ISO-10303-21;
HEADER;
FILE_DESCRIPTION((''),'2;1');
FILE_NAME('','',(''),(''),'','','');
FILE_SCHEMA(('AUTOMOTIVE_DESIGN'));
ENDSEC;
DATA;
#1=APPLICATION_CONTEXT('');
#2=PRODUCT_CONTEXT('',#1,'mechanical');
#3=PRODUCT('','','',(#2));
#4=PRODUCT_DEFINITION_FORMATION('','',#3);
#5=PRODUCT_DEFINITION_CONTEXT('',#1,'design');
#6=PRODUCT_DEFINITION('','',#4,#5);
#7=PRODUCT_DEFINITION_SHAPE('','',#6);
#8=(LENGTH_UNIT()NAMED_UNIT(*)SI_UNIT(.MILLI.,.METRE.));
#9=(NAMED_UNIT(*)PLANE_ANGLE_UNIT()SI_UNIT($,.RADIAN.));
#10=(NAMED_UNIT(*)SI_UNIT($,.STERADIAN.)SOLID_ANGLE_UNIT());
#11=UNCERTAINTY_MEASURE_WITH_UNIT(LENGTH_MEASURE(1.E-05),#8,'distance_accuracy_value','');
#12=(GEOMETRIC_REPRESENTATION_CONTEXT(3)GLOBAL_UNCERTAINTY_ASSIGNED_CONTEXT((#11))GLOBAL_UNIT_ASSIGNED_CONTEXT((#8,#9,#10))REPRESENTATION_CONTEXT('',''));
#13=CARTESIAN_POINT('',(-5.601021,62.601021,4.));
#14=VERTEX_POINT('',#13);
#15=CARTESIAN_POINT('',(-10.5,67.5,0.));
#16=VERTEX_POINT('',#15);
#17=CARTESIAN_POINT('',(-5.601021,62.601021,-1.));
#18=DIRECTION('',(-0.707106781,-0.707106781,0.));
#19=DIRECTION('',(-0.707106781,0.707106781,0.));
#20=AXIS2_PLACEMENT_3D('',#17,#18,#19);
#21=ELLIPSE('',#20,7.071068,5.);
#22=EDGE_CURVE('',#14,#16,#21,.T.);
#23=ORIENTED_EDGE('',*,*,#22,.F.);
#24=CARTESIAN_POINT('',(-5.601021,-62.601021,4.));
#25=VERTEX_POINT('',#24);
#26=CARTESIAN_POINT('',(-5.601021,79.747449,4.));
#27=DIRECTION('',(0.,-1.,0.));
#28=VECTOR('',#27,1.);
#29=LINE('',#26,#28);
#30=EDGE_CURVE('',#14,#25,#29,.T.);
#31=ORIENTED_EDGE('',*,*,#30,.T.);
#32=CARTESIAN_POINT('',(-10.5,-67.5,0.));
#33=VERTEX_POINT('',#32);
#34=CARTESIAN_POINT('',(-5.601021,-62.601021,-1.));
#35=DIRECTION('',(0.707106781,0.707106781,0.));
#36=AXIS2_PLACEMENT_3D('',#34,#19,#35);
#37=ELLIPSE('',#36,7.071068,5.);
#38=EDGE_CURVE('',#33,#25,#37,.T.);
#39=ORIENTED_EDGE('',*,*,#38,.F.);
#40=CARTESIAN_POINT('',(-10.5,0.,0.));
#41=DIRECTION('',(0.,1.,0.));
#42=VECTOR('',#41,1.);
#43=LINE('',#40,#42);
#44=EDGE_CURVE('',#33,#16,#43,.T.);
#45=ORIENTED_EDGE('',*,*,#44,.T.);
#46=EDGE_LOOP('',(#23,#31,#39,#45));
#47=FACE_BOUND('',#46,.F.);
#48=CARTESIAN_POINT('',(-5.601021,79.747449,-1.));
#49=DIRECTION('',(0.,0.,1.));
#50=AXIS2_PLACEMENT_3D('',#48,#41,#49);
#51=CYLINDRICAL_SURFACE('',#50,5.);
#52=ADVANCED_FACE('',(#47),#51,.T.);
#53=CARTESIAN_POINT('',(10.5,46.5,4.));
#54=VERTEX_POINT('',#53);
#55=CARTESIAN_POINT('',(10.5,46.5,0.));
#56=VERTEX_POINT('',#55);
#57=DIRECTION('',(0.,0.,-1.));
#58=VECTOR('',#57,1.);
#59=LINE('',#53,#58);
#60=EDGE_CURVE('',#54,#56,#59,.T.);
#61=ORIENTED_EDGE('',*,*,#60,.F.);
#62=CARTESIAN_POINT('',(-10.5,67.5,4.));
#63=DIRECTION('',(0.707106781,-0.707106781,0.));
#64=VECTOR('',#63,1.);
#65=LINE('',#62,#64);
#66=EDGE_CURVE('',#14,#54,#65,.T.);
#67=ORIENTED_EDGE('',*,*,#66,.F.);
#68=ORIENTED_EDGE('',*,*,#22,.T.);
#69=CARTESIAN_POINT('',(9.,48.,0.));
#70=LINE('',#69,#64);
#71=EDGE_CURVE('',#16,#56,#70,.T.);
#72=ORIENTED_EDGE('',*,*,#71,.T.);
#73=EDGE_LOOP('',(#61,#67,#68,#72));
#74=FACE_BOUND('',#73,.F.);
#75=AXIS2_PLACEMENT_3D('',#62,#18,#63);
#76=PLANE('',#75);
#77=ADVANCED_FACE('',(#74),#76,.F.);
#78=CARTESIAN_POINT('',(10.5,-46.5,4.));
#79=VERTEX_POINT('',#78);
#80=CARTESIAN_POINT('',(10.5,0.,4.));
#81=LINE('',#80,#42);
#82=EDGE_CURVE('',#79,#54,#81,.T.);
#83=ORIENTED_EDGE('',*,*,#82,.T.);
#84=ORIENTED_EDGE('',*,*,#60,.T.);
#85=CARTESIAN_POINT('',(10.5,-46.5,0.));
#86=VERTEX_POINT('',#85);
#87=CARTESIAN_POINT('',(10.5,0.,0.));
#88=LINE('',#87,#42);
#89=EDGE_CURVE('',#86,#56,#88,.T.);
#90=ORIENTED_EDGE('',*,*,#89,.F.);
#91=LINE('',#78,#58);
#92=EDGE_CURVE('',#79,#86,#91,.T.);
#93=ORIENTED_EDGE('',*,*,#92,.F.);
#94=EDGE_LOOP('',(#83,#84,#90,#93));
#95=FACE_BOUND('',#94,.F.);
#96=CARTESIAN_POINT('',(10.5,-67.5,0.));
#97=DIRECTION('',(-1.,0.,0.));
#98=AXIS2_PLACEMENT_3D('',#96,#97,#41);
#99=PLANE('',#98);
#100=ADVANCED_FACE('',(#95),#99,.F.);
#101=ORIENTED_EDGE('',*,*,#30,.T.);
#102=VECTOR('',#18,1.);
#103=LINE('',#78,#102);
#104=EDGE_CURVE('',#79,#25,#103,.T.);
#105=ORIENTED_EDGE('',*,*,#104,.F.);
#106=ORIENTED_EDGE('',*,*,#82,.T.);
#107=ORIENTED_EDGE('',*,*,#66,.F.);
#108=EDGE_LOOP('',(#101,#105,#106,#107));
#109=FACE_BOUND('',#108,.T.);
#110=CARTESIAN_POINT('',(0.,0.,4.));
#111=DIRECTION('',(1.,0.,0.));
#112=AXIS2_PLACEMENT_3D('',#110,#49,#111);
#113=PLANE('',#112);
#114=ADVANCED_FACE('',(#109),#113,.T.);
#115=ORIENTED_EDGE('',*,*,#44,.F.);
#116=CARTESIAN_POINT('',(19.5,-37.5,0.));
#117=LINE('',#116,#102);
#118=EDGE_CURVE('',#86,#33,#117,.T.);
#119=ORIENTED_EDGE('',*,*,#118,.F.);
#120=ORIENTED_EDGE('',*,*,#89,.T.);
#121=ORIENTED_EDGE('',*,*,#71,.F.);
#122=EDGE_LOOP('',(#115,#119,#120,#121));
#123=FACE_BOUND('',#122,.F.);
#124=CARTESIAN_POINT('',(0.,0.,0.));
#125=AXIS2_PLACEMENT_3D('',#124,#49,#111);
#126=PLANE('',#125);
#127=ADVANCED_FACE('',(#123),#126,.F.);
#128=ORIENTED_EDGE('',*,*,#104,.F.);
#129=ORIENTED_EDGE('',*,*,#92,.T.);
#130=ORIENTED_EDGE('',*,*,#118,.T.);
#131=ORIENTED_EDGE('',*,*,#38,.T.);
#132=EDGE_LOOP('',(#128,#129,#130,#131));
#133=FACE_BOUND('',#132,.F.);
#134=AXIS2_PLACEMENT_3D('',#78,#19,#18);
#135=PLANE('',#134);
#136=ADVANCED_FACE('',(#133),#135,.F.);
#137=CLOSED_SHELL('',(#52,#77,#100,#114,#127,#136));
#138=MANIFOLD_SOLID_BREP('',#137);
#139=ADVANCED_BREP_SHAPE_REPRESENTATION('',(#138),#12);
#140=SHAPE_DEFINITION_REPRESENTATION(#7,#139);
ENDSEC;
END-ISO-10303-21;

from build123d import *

# Parameters (mm, degrees)
F0_W        = 21
F0_H        = 135
F1_DEPTH    = 4
F3_DEPTH    = 4.001
F4_T1_DEPTH = 159.4948974279


# Not quite as in the source:
# - a fillet or chamfer that OpenCascade refuses, or shapes differently, is made with other operations: its cross-section is extruded or revolved along the edge and cut away or added


with BuildPart() as f1:
    # F0 (on Top) → F1 (new body)
    with BuildSketch(Plane.XY):
        Rectangle(F0_W, F0_H)
    extrude(amount=F1_DEPTH)

    # F2 (on face) → F3 (cut, through all)
    with BuildSketch(Plane.XY.offset(4)):
        Polygon((10.5, 67.5), (-10.5, 67.5), (10.5, 46.5), align=None)
        Polygon((10.5, -46.5), (-10.5, -67.5), (10.5, -67.5), align=None)
    extrude(amount=-F3_DEPTH, mode=Mode.SUBTRACT)

    # F4: fillet of radius 5 on 1 edges, made by hand

    # F4_s2 → F4_t1 (cut)
    with BuildSketch(Plane.XZ.offset(-79.7474487139)):
        with BuildLine():
            ThreePointArc((-5.6010205144, 4), (-8.7632981746, 2.8729833462), (-10.5, 0))
            Line((-10.5, 0), (-10.5, 4))
            Line((-10.5, 4), (-5.6010205144, 4))
        make_face()
    extrude(amount=F4_T1_DEPTH, mode=Mode.SUBTRACT)


solid = f1.part
